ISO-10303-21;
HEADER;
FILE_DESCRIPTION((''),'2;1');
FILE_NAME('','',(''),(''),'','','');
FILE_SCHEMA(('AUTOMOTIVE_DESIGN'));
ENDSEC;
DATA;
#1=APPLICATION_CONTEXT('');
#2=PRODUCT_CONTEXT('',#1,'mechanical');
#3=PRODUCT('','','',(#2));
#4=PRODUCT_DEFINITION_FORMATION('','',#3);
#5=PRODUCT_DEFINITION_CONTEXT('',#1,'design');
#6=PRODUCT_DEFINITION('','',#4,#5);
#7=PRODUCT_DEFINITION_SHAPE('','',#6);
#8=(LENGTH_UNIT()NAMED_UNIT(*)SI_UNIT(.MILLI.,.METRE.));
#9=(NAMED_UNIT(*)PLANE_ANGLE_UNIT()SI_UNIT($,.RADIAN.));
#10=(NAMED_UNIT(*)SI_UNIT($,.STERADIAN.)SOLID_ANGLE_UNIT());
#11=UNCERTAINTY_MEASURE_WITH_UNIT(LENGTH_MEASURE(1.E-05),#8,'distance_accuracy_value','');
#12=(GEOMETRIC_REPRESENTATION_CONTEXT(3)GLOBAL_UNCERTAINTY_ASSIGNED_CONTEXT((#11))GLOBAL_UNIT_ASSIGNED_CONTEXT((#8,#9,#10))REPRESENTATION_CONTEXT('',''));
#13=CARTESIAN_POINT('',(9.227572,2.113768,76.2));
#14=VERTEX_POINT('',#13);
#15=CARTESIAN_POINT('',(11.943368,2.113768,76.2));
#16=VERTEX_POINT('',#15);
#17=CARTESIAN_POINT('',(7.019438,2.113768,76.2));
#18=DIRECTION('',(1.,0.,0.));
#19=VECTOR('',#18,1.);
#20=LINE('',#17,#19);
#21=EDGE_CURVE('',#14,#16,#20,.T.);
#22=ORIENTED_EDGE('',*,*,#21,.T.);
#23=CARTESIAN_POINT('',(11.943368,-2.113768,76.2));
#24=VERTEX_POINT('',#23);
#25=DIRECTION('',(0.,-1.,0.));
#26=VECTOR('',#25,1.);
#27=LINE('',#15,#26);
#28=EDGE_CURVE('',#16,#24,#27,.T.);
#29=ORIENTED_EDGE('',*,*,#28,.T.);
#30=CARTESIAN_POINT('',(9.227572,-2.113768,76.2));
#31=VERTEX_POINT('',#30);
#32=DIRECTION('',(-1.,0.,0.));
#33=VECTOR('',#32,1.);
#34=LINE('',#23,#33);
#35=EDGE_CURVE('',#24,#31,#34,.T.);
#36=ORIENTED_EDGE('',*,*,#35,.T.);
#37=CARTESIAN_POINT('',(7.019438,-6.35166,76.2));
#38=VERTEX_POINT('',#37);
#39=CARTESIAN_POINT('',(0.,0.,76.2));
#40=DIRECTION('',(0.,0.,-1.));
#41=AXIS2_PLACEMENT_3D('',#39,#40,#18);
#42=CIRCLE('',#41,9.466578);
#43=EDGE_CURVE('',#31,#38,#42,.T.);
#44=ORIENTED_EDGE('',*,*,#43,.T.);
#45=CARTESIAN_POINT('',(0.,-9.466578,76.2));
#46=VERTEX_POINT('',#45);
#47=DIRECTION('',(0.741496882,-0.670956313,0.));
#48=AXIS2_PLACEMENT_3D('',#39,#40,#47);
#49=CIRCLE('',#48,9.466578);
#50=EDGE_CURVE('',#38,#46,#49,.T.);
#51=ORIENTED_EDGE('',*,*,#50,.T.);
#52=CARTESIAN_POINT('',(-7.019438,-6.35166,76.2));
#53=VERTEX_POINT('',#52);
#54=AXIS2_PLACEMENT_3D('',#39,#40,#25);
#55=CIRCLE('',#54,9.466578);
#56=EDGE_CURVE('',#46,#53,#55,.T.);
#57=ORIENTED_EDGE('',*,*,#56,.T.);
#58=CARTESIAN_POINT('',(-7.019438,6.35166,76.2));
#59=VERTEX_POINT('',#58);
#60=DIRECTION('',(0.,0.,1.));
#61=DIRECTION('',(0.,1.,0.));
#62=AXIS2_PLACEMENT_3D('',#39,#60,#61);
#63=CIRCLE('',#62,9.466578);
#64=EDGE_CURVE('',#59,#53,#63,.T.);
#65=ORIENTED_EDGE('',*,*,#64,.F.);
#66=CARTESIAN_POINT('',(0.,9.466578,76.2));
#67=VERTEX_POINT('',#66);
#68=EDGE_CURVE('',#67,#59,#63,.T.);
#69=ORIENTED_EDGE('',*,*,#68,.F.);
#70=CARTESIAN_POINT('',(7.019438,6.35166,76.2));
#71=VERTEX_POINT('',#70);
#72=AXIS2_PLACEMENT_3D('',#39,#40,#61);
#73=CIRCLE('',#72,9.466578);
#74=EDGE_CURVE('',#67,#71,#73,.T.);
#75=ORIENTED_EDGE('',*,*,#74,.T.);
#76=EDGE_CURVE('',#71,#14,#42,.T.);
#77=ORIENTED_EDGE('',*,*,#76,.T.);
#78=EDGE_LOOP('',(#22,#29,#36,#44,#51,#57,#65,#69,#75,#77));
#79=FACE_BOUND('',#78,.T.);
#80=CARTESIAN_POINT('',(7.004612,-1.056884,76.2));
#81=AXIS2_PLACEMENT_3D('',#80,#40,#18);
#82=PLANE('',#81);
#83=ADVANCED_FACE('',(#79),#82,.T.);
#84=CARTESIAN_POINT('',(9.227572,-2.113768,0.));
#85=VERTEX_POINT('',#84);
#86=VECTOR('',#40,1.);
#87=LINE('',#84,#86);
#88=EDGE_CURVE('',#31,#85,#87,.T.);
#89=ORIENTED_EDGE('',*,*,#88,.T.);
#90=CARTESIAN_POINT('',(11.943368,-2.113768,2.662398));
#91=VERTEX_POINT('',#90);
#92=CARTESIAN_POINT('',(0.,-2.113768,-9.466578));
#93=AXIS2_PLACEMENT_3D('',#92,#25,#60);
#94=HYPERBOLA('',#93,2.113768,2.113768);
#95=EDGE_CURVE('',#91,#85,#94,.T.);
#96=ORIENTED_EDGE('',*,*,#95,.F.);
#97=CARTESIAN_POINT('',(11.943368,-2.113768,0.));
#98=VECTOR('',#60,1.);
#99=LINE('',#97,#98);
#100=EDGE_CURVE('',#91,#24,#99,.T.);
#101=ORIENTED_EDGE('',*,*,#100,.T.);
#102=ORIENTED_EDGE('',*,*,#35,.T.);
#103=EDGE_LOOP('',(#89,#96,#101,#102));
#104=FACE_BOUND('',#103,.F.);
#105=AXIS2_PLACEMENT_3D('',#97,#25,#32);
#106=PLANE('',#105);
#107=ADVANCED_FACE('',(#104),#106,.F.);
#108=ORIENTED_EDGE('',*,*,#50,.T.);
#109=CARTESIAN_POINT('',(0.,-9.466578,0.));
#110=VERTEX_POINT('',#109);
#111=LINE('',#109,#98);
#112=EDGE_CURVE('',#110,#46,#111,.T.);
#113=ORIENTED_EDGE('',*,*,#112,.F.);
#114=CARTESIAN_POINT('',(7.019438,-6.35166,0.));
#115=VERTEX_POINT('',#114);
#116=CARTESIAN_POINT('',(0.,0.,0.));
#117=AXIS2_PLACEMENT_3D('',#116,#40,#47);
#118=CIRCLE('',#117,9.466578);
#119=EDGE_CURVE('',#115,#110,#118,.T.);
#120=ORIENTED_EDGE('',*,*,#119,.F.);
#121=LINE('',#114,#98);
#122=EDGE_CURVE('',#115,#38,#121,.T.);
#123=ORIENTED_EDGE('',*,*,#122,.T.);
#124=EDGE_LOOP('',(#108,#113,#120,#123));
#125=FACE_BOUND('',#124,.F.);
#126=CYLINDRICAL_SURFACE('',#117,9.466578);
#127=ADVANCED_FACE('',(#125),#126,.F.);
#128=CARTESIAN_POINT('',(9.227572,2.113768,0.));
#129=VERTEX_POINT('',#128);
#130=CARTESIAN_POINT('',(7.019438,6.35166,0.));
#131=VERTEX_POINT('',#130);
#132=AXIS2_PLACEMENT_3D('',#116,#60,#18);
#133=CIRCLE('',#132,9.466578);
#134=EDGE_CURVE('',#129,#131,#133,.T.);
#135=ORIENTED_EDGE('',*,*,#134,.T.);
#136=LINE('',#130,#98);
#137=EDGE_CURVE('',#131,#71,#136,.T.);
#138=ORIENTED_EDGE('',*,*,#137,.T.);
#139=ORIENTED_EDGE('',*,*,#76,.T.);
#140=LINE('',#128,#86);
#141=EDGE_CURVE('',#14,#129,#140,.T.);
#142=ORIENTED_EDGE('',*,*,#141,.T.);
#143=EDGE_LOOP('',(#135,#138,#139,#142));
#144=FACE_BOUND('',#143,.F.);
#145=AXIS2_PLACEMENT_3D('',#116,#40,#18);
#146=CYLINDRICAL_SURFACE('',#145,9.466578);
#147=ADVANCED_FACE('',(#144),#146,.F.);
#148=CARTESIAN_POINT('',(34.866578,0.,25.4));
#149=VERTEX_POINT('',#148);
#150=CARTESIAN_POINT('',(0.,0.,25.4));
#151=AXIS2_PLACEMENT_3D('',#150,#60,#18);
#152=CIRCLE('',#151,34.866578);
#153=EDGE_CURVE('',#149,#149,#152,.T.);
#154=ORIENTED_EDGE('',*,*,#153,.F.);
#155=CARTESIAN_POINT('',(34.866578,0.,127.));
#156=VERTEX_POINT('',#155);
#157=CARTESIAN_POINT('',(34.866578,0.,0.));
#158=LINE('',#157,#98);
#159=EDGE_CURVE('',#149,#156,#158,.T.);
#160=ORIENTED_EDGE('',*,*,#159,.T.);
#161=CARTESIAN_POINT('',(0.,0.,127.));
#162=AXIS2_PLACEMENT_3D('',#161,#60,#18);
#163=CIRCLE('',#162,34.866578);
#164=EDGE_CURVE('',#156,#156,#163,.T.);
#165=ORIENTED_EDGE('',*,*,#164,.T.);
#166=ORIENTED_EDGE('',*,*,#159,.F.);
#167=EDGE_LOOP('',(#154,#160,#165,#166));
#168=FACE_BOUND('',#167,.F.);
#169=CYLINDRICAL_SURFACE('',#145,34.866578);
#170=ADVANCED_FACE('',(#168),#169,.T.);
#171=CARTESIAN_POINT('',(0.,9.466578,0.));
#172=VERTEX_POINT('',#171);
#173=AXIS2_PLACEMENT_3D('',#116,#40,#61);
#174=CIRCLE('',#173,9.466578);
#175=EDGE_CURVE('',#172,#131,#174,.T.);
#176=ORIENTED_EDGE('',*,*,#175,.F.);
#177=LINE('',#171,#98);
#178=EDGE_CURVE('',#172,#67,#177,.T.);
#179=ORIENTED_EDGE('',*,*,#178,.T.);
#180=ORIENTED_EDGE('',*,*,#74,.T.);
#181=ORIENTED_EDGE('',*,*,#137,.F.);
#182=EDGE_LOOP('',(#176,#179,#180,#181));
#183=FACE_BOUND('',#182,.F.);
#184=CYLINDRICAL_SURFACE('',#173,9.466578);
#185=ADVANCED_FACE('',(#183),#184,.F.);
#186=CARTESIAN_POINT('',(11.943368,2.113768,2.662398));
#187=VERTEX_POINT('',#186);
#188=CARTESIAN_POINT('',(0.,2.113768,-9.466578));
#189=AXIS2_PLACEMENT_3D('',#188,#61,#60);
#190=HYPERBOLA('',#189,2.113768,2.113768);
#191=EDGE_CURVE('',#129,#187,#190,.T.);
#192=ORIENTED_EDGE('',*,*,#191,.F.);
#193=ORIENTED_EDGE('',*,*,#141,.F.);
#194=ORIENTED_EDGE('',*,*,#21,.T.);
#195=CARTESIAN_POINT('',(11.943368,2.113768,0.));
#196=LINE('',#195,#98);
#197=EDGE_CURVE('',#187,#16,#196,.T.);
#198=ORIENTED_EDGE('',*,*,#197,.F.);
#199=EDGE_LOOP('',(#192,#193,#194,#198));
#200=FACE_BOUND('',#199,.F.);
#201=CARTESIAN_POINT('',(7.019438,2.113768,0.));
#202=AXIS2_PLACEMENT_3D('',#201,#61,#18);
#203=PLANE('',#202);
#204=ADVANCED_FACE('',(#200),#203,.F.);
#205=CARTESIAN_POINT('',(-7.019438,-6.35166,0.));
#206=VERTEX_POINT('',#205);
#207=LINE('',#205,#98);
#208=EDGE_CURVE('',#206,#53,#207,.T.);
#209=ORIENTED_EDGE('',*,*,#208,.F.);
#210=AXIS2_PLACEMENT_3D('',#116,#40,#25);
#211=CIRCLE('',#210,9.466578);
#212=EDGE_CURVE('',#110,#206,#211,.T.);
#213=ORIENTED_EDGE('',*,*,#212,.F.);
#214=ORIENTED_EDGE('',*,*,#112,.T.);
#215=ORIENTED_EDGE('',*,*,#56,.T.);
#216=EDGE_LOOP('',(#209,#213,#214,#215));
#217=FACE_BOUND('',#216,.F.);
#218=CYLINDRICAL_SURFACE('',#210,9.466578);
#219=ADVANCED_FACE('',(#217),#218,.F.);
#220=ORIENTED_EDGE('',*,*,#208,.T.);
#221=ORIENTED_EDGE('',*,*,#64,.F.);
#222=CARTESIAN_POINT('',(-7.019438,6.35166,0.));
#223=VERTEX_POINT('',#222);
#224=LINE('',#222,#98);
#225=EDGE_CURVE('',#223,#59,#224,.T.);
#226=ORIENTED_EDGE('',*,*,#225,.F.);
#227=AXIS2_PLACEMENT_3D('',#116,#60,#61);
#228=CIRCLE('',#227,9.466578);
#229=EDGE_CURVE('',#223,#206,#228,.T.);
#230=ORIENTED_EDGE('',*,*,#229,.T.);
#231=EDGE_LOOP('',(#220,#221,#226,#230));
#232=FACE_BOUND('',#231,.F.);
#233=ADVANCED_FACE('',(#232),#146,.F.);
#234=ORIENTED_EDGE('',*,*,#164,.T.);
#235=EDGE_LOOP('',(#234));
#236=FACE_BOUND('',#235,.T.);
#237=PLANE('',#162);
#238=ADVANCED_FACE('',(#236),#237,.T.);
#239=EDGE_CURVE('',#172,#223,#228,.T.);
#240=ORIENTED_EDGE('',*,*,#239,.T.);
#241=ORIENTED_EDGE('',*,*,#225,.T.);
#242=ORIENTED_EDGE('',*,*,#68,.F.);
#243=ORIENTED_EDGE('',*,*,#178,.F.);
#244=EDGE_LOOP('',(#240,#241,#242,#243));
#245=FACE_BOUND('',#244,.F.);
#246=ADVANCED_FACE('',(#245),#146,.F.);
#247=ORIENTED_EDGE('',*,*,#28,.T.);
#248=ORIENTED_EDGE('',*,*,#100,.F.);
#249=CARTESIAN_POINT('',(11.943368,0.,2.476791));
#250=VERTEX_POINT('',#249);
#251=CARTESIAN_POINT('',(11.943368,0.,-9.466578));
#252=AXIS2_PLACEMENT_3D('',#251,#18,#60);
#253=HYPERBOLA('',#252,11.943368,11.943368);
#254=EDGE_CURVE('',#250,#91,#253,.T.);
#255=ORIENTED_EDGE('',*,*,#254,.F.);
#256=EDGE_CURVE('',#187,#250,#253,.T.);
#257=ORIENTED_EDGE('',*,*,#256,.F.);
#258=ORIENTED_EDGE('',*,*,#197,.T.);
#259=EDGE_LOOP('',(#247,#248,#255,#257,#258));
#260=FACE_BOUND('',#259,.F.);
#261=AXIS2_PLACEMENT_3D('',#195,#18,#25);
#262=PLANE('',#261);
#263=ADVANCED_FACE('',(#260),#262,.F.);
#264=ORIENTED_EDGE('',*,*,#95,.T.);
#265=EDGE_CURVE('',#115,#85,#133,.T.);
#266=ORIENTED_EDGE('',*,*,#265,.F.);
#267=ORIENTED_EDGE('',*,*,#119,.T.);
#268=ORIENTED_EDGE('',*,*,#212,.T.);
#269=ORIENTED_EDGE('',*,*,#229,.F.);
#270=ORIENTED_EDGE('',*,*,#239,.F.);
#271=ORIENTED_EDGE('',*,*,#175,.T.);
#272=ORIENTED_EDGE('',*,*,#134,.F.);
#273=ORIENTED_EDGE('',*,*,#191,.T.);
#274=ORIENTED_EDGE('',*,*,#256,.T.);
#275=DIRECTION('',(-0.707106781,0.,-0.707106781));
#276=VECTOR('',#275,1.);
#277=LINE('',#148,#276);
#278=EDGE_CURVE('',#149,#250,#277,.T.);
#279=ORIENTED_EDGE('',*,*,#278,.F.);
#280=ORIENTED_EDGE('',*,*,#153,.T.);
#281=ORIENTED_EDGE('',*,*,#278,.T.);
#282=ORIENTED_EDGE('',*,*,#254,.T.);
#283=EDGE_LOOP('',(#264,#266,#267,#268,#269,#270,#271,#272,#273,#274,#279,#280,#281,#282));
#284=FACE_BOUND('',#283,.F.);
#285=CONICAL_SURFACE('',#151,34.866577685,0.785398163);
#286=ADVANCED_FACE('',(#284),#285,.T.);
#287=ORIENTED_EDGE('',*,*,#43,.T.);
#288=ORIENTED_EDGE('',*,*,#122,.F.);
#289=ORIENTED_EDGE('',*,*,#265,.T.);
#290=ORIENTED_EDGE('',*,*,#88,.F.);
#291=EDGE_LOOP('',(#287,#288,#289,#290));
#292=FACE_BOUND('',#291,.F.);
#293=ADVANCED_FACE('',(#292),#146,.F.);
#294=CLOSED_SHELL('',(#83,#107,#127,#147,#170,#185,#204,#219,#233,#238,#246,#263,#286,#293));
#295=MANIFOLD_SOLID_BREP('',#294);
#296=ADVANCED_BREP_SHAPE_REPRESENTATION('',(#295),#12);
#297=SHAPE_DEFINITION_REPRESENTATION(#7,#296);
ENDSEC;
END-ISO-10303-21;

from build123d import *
from build123d import SkipClean  # not in build123d's __all__

# Parameters (mm, degrees)
F0_R       = 34.8665776849
F1_DEPTH   = 127
F2_SIZE    = 25.4
F3_W       = 0.0296507081
F3_H       = 2.1137676667
F3_W_2     = 1.5040034195
F3_H_2     = 6.3516600603
F3_W_3     = 5.515434417
F1_FACE_R  = 9.4665776849
F1_FACE1_R = 34.8665776849
F4_DEPTH   = 76.2


with BuildPart() as f1:
    # F0 (on Top) → F1 (new body)
    with BuildSketch(Plane.XY):
        Circle(F0_R)
    extrude(amount=F1_DEPTH)

    # F2
    f2_edges = [f1.edges().sort_by_distance(p)[0] for p in [
        (-34.866578, 0, 0),
    ]]
    chamfer(f2_edges, length=F2_SIZE)

    # F3 (on face) + F1_face (on face) + F1_face1 (on face) → F4 (cut)
    with BuildSketch(Plane(origin=(0, 0, 0), x_dir=(1, 0, 0), z_dir=(0, 0, -1))):
        with Locations((7.0046124826, 1.0568838334)):
            Rectangle(F3_W, F3_H)
        with Locations((7.0046124826, -1.0568838334)):
            Rectangle(F3_W, F3_H)
        with Locations((0.7520017098, -3.1758300302)):
            Rectangle(F3_W_2, F3_H_2)
        with BuildLine():
            Line((7.0194378366, 2.1137676667), (7.0194378366, 0))
            Line((7.0194378366, 0), (9.4665776849, 0))
            ThreePointArc((9.4665776849, 0), (9.4066364158, 1.0636185423), (9.2275716911, 2.1137676667))
            Line((9.2275716911, 2.1137676667), (7.0194378366, 2.1137676667))
        make_face()
        with BuildLine():
            Line((7.0194378366, 0), (7.0194378366, -2.1137676667))
            Line((7.0194378366, -2.1137676667), (9.2275716911, -2.1137676667))
            ThreePointArc((9.2275716911, -2.1137676667), (9.4066364158, -1.0636185423), (9.4665776849, 0))
            Line((9.4665776849, 0), (7.0194378366, 0))
        make_face()
        with BuildLine():
            ThreePointArc((9.4665776849, 0), (9.4066364158, -1.0636185423), (9.2275716911, -2.1137676667))
            Line((9.2275716911, -2.1137676667), (11.9433682412, -2.1137676667))
            Line((11.9433682412, -2.1137676667), (11.9433682412, 2.1137676667))
            Line((11.9433682412, 2.1137676667), (9.2275716911, 2.1137676667))
            ThreePointArc((9.2275716911, 2.1137676667), (9.4066364158, 1.0636185423), (9.4665776849, 0))
        make_face()
        with Locations((-4.2617206281, 3.1758300302)):
            Rectangle(F3_W_3, F3_H_2)
        with Locations((-4.2617206281, -3.1758300302)):
            Rectangle(F3_W_3, F3_H_2)
        Polygon((1.5040034195, -6.3516600603), (7.0194378366, -6.3516600603), (7.0194378366, -2.1137676667), (6.9897871285, -2.1137676667), (6.9897871285, 0), (1.5040034195, 0), align=None)
        Polygon((1.5040034195, 6.3516600603), (1.5040034195, 0), (6.9897871285, 0), (6.9897871285, 2.1137676667), (7.0194378366, 2.1137676667), (7.0194378366, 6.3516600603), align=None)
        with Locations((0.7520017098, 3.1758300302)):
            Rectangle(F3_W_2, F3_H_2)
        with Locations((-0.7520017098, 3.1758300302)):
            Rectangle(F3_W_2, F3_H_2)
        with BuildLine():
            Line((-1.5040034195, 6.3516600603), (0, 6.3516600603))
            Line((0, 6.3516600603), (0, 9.4665776849))
            ThreePointArc((0, 9.4665776849), (-3.8397662477, 8.6528774535), (-7.0194378366, 6.3516600603))
            Line((-7.0194378366, 6.3516600603), (-1.5040034195, 6.3516600603))
        make_face()
        with Locations((-0.7520017098, -3.1758300302)):
            Rectangle(F3_W_2, F3_H_2)
        with BuildLine():
            Line((0, 9.4665776849), (0, 6.3516600603))
            Line((0, 6.3516600603), (1.5040034195, 6.3516600603))
            Line((1.5040034195, 6.3516600603), (7.0194378366, 6.3516600603))
            ThreePointArc((7.0194378366, 6.3516600603), (3.8397662477, 8.6528774535), (0, 9.4665776849))
        make_face()
        with BuildLine():
            Line((0, -6.3516600603), (0, -9.4665776849))
            ThreePointArc((0, -9.4665776849), (3.8397662477, -8.6528774535), (7.0194378366, -6.3516600603))
            Line((7.0194378366, -6.3516600603), (1.5040034195, -6.3516600603))
            Line((1.5040034195, -6.3516600603), (0, -6.3516600603))
        make_face()
    with BuildSketch(Plane(origin=(0, 0, 0), x_dir=(1, 0, 0), z_dir=(0, 0, -1))):
        Circle(F1_FACE_R)
    with BuildSketch(Plane.XY.offset(127)):
        Circle(F1_FACE1_R)
    extrude(amount=-F4_DEPTH, dir=(0, 0, -1), mode=Mode.SUBTRACT)

    # F5: F1 across plane


with BuildPart() as f1_1:
    add(f1.part, clean=False)
    with SkipClean():  # cleaning this boolean's faces spoils the solid; the shape is the same uncleaned
        add(f1.part.mirror(Plane.XZ), clean=False)


solid = f1_1.part
